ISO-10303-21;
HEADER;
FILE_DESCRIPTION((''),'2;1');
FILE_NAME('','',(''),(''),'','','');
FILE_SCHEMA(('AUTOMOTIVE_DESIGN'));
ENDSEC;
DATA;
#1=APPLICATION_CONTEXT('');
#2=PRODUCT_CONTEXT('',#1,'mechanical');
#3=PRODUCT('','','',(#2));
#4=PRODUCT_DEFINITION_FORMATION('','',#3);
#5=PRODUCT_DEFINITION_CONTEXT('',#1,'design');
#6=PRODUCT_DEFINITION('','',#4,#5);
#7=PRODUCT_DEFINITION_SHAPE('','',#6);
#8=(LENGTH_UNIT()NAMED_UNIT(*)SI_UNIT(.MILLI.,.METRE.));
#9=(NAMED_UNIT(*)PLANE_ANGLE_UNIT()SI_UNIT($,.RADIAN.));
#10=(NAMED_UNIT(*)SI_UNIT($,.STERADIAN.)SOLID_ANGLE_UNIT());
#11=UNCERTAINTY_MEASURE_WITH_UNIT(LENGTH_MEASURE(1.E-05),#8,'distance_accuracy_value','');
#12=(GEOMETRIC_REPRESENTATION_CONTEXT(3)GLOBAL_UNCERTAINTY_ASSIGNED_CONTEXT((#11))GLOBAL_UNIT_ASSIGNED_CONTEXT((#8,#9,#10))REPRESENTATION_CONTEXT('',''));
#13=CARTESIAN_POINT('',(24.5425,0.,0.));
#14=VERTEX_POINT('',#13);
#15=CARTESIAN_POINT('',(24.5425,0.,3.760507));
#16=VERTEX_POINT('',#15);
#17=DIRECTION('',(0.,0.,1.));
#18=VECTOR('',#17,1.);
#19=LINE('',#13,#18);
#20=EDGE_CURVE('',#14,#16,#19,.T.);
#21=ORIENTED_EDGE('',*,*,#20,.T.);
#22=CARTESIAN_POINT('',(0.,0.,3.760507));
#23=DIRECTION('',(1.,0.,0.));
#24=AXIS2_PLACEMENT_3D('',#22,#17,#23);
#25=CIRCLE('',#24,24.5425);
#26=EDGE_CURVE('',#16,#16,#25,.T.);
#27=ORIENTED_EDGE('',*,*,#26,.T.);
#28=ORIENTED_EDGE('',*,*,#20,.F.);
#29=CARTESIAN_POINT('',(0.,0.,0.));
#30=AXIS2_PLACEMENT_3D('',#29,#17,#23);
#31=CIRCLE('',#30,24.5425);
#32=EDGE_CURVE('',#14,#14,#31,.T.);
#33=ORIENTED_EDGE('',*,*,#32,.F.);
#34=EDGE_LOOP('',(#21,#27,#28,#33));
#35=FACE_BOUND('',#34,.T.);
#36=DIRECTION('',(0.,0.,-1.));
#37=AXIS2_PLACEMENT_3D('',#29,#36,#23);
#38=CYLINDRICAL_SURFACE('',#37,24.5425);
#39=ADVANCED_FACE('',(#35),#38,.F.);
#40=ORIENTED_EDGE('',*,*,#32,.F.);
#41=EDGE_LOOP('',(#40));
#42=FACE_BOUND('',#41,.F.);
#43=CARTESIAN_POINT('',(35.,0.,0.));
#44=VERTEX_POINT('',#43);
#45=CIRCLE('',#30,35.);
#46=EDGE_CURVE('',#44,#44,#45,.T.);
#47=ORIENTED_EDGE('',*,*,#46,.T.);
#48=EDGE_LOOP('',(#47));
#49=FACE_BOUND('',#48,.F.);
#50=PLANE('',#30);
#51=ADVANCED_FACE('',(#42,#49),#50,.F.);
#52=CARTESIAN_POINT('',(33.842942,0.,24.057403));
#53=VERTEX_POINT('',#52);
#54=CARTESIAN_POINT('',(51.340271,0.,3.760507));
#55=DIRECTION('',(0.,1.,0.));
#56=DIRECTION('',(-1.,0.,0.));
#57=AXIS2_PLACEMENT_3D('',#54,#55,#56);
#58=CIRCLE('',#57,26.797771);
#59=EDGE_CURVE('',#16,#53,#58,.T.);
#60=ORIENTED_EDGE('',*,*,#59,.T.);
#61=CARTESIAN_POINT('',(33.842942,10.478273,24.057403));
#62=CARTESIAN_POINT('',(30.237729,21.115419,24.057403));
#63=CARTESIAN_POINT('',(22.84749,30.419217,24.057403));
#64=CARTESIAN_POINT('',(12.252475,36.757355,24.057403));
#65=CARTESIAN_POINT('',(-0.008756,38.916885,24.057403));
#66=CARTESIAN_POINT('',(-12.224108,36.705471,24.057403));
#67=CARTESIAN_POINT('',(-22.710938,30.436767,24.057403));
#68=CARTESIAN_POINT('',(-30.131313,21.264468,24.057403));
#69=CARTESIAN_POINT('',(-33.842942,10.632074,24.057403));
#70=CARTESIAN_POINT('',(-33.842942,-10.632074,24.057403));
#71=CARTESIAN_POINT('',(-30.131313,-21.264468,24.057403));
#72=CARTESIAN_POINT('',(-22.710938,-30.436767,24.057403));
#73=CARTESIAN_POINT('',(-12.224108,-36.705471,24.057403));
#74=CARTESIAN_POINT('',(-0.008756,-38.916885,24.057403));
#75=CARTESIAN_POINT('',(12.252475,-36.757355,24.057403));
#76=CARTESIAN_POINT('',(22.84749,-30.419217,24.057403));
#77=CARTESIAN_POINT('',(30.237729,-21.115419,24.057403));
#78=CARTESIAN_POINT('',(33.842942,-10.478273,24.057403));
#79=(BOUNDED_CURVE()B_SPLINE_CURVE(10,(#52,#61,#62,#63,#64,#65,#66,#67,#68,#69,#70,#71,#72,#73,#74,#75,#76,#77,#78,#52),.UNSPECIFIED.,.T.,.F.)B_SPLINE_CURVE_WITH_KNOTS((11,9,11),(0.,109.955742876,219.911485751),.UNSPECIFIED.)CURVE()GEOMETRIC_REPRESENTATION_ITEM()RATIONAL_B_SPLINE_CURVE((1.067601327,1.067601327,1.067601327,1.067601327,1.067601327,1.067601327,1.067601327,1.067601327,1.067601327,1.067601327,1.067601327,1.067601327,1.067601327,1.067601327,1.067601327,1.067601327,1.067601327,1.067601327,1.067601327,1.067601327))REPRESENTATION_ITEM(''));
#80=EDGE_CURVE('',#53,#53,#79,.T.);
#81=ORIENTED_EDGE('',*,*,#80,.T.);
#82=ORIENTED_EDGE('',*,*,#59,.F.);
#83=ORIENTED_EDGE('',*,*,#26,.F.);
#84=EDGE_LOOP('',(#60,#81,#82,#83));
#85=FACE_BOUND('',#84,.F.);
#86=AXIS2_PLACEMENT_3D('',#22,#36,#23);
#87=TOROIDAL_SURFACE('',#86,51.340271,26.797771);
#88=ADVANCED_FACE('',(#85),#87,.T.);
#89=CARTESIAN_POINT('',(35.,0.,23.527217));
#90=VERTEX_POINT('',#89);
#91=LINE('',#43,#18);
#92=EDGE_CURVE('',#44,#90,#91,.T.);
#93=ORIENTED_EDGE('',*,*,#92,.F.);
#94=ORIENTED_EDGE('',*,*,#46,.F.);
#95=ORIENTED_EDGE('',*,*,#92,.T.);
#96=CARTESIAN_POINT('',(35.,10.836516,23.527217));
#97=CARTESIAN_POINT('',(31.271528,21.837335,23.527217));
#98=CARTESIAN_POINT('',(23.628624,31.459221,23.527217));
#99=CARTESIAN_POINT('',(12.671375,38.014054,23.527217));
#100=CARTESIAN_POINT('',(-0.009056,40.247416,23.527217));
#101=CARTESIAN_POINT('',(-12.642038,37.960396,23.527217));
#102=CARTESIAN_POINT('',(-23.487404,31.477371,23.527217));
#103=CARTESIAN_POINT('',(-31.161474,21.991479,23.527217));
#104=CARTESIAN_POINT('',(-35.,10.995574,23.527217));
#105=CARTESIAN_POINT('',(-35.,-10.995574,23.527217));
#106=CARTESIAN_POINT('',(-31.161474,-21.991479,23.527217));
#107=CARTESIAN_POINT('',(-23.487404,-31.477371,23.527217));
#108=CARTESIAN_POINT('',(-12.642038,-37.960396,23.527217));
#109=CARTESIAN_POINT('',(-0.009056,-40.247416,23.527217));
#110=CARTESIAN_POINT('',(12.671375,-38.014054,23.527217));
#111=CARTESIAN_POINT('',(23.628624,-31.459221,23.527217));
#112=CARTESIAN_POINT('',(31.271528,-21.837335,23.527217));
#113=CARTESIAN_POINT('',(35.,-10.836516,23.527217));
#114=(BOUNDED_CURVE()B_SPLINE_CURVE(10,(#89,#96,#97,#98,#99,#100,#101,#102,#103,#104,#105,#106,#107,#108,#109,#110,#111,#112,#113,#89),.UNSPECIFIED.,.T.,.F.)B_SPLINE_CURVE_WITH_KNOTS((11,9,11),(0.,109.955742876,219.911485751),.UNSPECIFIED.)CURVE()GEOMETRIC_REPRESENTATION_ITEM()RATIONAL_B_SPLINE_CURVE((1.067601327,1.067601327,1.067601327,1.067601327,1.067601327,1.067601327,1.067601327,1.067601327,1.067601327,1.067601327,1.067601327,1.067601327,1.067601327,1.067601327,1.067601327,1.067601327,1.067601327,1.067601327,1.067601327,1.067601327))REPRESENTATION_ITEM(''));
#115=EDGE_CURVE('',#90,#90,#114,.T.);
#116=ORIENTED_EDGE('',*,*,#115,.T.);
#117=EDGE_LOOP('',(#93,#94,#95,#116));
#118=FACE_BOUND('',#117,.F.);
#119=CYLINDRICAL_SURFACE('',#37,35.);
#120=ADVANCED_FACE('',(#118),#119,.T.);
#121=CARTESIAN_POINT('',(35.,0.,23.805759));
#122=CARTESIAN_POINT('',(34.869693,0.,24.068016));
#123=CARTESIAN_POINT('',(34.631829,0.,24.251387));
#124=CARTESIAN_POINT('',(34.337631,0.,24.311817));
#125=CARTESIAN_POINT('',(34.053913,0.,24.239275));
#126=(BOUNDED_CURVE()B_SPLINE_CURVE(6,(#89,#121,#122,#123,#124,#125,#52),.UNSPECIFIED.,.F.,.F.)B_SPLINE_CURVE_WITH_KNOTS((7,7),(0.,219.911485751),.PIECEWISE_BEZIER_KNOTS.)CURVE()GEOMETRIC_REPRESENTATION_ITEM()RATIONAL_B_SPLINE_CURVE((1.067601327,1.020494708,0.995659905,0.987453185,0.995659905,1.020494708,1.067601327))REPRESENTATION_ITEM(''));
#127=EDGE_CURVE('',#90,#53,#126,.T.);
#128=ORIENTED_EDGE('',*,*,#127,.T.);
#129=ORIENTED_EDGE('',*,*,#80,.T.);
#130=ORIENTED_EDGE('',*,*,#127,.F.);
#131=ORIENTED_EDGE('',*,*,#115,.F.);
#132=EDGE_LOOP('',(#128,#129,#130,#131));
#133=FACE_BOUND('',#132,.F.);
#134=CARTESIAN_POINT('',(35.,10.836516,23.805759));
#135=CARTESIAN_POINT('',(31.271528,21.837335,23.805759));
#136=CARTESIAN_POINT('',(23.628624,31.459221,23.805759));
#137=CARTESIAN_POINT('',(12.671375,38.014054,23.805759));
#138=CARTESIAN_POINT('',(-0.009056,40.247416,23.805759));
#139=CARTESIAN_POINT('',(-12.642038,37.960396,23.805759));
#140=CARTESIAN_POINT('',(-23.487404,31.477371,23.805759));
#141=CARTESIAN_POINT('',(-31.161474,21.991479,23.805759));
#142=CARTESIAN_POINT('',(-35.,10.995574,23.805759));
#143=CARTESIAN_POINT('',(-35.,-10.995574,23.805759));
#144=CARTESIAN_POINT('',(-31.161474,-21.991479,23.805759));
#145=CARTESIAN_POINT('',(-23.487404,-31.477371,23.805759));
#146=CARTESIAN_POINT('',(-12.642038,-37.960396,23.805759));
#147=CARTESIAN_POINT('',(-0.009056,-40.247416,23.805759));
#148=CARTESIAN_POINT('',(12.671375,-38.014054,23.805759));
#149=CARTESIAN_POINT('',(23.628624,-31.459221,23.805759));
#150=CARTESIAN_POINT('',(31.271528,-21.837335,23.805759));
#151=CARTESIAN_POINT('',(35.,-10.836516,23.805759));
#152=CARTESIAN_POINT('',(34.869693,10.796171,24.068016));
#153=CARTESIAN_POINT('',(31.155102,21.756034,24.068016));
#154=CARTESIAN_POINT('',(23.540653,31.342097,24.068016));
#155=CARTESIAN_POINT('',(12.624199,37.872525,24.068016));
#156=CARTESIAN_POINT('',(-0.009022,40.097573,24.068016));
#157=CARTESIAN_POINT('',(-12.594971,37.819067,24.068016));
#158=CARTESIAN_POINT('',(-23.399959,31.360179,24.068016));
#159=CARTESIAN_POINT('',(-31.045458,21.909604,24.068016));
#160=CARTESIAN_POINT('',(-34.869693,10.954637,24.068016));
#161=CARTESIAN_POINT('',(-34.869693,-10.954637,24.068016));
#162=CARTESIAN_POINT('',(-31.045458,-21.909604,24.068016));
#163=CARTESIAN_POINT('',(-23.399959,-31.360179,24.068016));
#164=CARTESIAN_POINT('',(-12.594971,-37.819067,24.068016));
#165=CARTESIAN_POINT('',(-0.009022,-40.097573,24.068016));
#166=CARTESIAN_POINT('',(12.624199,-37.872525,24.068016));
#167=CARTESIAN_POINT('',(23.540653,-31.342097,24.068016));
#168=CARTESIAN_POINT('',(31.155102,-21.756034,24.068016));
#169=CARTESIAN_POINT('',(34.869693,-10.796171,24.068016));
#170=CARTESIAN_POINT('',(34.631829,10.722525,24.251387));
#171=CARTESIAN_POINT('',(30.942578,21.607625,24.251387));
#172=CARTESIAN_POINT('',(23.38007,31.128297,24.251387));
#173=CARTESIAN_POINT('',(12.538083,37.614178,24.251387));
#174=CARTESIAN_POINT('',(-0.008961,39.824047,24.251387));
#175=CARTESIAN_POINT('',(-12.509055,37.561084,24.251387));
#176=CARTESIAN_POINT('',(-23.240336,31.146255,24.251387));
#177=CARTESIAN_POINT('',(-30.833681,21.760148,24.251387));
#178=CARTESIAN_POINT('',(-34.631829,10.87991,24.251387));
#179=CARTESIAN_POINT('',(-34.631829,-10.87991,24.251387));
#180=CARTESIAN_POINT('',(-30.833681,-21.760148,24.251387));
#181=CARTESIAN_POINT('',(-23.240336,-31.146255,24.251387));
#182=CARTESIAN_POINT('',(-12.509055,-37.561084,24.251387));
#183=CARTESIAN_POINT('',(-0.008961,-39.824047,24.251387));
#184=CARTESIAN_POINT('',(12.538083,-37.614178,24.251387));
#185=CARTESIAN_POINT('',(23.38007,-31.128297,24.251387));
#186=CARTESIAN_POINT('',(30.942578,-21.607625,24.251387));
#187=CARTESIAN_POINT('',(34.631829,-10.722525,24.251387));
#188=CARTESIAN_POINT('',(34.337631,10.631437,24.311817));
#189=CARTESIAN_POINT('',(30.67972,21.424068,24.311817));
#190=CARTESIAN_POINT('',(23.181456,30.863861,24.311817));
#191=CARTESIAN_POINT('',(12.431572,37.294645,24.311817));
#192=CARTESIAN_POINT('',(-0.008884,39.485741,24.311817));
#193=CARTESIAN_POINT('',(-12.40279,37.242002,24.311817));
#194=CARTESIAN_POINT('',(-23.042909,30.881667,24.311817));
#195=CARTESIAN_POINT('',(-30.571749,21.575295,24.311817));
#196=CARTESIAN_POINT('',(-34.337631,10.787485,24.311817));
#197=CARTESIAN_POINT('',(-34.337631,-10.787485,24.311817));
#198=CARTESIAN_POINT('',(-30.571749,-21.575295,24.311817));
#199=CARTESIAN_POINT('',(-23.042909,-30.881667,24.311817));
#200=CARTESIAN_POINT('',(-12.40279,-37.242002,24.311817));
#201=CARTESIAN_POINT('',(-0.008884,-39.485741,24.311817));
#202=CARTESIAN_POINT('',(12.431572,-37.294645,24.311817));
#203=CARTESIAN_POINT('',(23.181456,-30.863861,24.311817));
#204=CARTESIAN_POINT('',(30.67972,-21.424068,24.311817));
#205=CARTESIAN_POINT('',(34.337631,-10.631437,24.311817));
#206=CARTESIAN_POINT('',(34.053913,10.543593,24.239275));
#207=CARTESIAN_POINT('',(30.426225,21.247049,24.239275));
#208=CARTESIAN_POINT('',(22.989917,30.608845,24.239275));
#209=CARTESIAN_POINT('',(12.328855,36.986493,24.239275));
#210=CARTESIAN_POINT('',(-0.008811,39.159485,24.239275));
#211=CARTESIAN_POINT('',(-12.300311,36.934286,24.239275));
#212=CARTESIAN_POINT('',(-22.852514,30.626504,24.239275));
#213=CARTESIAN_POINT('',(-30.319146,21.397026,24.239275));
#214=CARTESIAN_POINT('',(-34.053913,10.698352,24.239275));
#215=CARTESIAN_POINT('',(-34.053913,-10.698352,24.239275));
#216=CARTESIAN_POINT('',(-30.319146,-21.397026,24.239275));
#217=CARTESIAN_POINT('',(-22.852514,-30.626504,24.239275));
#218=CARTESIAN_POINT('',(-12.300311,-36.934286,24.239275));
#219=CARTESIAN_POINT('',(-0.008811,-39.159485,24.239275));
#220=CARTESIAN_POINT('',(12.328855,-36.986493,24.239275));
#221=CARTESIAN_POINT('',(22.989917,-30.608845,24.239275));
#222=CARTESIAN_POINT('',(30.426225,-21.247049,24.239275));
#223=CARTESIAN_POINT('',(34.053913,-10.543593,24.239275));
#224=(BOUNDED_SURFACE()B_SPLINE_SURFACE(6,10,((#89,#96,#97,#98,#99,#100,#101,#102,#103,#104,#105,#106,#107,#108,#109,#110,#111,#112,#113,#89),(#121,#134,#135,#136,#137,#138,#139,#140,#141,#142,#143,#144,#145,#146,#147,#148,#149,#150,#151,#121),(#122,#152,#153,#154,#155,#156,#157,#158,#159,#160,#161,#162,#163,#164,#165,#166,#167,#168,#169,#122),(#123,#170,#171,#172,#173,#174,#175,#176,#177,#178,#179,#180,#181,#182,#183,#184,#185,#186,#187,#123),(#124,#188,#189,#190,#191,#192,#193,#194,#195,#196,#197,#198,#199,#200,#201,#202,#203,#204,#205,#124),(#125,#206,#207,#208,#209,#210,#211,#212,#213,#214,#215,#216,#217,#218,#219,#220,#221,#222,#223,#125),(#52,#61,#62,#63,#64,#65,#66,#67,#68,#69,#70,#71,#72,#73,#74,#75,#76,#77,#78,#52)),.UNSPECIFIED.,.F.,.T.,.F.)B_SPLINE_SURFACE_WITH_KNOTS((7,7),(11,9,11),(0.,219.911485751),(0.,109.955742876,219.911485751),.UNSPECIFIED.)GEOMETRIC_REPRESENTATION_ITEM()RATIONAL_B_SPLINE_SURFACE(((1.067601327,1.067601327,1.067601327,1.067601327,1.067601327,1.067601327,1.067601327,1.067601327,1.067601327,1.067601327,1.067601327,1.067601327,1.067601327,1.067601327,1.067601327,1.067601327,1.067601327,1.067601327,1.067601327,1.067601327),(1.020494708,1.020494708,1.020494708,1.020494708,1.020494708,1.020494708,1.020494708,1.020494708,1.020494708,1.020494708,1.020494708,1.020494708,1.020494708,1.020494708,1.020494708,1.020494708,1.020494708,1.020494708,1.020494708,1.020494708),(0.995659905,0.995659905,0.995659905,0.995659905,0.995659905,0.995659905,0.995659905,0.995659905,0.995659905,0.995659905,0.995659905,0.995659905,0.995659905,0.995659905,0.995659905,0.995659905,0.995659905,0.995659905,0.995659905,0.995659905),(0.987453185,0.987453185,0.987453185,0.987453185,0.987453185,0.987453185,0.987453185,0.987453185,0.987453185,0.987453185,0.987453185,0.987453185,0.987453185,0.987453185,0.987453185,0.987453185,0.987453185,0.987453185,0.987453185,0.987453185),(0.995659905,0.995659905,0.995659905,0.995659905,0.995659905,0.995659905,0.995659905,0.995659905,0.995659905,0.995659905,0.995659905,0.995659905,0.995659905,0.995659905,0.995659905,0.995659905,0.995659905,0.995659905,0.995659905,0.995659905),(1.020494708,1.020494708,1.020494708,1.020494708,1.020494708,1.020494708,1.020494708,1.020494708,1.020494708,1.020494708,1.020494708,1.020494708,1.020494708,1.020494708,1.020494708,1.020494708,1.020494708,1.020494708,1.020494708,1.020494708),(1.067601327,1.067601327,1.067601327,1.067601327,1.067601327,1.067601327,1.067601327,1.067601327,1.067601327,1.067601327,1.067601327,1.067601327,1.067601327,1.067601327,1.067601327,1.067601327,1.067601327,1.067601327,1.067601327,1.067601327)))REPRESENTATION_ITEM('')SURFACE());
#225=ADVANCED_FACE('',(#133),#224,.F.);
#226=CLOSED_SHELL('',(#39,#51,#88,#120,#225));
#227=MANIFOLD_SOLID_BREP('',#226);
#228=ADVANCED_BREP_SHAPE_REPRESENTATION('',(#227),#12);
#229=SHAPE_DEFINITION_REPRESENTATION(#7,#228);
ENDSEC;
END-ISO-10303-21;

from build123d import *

# Parameters (mm, degrees)
F0_R     = 35
F0_R_2   = 24.5425
F1_DEPTH = 25
F3_R     = 0.7


# Not quite as in the source:
# - a fillet or chamfer that OpenCascade refuses, or shapes differently, is made with other operations: its cross-section is extruded or revolved along the edge and cut away or added


with BuildPart() as f1:
    # F0 (on Top) → F1 (new body)
    with BuildSketch(Plane.XY):
        Circle(F0_R)
        Circle(F0_R_2, mode=Mode.SUBTRACT)
    extrude(amount=F1_DEPTH)

    # F2: fillet of radius 26.7977705423 on 1 edges, made by hand

    # F2_s1 → F2_t2 (revolve, cut)
    with BuildSketch(Plane.XZ):
        with BuildLine():
            ThreePointArc((24.5425, 3.7605069589), (27.2986053896, 15.5976874814), (35, 25))
            Line((35, 25), (34.6731945892, 25.4247898608))
            ThreePointArc((34.6731945892, 25.4247898608), (29.77125, 25.5359554108), (24.5425, 25.5359554108))
            Line((24.5425, 25.5359554108), (24.0065445892, 25))
            Line((24.0065445892, 25), (24.0065445892, 3.7605069589))
            Line((24.0065445892, 3.7605069589), (24.5425, 3.7605069589))
        make_face()
    revolve(axis=Axis((0, 0, 25), (0, 0, 1)), mode=Mode.SUBTRACT)

    # F3
    f3_edges = [f1.edges().sort_by_distance(p)[0] for p in [
        (-35, 0, 25),
    ]]
    fillet(f3_edges, radius=F3_R)


solid = f1.part
